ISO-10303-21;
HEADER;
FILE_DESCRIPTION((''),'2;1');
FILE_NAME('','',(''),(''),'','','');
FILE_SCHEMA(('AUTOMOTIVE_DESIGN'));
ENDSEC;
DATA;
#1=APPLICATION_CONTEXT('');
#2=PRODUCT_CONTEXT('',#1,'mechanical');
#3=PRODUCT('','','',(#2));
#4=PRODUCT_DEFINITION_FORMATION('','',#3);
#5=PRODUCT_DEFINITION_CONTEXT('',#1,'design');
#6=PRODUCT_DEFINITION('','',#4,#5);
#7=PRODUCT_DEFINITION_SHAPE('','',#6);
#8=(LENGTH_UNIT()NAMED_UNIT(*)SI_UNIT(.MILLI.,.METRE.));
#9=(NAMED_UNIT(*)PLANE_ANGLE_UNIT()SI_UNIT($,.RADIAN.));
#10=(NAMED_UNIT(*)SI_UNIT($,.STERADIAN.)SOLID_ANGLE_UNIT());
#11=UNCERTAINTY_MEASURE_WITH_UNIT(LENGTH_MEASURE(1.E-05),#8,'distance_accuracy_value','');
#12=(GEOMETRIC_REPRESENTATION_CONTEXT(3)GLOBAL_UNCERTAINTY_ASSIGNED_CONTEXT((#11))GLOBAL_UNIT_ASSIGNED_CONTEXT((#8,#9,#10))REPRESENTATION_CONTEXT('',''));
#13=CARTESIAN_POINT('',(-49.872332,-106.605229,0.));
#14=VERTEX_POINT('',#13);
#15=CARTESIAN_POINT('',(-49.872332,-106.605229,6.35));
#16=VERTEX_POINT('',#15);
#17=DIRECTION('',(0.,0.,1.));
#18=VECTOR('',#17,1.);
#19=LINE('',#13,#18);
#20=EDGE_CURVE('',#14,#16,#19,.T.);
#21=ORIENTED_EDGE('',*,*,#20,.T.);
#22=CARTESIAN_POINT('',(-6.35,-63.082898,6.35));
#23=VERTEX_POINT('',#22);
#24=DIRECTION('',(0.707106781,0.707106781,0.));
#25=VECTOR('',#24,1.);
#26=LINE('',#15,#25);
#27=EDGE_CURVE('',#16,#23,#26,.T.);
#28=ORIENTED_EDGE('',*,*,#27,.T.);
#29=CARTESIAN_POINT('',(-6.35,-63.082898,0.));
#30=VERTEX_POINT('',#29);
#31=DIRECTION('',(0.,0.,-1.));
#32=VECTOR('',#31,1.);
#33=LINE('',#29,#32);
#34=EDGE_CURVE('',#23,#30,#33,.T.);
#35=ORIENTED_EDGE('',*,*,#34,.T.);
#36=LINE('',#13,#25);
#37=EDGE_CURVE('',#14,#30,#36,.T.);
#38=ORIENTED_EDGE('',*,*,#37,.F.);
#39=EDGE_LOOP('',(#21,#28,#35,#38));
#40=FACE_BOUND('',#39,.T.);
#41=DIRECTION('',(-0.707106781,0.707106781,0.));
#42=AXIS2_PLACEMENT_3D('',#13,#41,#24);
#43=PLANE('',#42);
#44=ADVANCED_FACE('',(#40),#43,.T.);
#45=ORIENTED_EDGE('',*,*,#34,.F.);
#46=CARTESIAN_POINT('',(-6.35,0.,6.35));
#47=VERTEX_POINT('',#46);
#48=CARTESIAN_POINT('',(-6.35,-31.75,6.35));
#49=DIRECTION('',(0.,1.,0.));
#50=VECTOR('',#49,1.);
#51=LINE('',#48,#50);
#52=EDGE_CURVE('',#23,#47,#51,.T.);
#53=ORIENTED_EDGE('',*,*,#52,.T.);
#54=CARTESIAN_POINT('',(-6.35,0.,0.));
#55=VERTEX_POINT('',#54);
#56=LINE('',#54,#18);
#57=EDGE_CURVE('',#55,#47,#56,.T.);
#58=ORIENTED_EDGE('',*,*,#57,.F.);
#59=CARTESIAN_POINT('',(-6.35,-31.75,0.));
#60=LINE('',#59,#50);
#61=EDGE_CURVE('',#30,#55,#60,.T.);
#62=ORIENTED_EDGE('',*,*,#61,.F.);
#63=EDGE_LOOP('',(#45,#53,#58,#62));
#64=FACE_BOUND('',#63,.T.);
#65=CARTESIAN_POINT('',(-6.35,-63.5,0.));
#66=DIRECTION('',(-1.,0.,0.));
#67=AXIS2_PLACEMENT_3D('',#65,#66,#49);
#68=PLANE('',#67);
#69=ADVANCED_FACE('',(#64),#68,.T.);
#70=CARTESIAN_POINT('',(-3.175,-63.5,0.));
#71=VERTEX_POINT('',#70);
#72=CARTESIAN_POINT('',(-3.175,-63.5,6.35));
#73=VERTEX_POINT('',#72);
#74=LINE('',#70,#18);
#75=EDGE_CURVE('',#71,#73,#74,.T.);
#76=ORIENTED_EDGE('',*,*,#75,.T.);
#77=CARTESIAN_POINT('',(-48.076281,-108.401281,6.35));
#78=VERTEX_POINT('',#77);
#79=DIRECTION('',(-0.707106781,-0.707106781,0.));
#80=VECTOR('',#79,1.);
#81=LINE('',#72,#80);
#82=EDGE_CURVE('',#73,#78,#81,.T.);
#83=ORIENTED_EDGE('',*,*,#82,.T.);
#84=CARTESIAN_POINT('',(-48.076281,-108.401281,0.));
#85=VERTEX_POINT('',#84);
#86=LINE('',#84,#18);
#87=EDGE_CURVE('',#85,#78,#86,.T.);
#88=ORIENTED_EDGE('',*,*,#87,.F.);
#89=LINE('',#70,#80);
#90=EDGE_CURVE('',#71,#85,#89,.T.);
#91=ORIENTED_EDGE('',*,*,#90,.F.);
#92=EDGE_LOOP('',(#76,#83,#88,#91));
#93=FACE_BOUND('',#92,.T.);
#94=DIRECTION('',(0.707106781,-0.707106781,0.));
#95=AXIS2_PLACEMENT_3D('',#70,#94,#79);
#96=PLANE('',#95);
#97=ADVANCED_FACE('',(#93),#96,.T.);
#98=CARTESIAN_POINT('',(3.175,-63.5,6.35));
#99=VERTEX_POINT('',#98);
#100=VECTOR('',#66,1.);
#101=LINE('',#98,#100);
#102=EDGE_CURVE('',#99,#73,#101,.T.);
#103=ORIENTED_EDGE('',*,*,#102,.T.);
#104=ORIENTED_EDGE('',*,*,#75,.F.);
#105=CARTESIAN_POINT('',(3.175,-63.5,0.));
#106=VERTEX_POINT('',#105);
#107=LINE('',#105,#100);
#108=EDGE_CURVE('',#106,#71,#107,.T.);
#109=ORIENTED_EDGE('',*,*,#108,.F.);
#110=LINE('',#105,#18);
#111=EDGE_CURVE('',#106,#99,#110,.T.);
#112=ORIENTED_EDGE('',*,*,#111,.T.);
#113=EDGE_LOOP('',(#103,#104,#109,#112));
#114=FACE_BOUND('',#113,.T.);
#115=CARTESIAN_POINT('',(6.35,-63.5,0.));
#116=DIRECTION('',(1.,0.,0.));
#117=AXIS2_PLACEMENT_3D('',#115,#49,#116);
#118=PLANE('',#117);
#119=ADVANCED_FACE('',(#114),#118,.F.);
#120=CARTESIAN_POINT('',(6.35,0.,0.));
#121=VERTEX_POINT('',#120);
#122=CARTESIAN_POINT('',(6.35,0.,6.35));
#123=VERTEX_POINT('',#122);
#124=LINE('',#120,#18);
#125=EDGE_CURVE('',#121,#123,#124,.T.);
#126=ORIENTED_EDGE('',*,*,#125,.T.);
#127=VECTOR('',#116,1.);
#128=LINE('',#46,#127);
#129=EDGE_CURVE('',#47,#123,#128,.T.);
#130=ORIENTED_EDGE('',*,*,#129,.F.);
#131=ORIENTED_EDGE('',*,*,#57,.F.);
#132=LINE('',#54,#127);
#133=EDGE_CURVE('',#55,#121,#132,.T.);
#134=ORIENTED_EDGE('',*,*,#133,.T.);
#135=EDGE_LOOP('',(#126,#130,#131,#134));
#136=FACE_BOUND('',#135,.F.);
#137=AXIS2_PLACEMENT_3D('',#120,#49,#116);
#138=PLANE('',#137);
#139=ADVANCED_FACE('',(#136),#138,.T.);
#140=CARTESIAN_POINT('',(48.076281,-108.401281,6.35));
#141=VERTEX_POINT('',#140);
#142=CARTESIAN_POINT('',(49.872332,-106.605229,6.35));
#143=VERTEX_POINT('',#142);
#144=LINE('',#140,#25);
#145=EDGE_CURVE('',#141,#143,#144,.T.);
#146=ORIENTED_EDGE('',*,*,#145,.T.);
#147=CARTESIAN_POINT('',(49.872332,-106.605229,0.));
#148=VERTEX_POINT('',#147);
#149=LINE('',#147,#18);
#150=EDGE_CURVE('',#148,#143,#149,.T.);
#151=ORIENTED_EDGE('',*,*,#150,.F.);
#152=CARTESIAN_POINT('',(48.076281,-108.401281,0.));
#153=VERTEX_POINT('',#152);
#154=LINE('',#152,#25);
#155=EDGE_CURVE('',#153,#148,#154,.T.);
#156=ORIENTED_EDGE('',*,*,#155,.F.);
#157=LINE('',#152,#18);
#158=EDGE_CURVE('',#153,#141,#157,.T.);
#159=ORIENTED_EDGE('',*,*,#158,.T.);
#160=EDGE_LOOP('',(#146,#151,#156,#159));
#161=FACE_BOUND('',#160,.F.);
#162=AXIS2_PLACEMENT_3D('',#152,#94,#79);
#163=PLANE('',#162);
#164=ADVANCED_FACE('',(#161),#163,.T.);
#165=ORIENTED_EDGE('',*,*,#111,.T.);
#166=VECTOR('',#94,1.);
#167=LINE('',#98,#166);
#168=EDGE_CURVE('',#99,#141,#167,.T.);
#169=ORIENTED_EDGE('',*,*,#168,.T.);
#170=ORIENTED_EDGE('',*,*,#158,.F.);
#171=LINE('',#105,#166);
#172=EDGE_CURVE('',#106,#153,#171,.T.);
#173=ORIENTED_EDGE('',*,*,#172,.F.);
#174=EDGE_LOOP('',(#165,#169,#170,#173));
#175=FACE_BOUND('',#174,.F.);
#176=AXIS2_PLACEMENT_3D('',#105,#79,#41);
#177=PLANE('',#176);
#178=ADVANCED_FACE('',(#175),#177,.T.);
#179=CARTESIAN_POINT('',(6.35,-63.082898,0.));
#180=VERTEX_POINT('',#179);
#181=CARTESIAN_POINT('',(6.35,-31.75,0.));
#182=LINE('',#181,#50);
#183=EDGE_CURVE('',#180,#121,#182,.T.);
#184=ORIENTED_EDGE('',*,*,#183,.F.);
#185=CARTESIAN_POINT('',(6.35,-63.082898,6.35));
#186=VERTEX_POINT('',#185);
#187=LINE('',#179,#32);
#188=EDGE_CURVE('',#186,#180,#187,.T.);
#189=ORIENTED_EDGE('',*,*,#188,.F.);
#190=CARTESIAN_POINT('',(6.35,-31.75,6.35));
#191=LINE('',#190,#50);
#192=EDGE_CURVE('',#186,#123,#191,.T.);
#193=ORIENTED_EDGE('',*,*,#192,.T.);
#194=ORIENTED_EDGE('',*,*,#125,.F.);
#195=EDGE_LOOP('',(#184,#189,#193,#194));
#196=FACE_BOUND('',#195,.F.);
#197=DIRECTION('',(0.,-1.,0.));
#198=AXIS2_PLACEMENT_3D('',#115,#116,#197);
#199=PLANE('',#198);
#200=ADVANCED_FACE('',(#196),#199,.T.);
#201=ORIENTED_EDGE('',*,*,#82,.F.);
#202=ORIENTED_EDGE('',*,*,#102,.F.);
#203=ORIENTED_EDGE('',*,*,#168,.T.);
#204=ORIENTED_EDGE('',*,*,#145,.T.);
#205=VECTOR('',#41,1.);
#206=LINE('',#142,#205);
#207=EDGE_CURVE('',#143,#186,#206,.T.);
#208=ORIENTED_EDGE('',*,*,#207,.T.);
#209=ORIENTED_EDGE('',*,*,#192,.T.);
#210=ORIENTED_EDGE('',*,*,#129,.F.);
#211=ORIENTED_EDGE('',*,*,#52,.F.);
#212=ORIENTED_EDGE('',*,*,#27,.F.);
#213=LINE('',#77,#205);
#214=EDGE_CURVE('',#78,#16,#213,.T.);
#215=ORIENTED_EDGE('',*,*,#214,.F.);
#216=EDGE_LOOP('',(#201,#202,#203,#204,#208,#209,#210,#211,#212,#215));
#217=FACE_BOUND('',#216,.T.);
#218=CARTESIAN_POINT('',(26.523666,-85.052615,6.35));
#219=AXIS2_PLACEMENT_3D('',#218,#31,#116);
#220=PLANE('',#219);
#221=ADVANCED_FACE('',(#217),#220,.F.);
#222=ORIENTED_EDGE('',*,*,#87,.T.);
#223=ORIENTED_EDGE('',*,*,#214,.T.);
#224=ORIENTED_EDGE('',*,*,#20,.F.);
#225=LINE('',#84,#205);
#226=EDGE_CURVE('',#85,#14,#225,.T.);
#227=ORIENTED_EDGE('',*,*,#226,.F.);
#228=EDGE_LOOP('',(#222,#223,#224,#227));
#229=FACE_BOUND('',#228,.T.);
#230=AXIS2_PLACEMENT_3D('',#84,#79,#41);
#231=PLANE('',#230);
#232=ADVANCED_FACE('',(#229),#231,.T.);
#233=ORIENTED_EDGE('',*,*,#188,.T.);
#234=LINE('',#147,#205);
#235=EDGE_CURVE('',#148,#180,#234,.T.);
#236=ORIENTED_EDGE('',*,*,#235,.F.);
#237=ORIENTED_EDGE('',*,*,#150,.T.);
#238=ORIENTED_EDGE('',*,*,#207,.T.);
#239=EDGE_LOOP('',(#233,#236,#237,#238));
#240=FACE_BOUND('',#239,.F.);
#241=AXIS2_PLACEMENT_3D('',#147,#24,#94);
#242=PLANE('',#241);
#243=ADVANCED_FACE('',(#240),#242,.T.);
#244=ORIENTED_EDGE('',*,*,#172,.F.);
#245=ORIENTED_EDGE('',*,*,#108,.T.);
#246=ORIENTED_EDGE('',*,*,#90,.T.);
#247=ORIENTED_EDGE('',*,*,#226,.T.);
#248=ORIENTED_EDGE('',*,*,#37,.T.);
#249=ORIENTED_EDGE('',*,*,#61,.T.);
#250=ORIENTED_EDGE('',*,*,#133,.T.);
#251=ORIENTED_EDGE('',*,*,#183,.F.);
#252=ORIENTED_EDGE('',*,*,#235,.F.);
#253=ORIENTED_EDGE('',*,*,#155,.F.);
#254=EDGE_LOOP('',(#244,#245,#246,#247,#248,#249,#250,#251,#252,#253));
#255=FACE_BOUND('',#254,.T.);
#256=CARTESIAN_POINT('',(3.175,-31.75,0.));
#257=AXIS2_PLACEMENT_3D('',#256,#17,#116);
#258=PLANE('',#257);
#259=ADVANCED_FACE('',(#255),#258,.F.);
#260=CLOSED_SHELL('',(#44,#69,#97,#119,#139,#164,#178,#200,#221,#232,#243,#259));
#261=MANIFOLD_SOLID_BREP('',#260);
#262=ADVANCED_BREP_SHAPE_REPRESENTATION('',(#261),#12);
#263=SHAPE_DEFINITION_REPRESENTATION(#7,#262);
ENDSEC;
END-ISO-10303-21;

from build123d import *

# Parameters (mm, degrees)
F0_W     = 6.35
F0_H     = 63.5
F1_DEPTH = 6.35
F3_DEPTH = 6.35


# Not quite as in the source:
# - a feature names something its author has since deleted; it is built from what else it names


with BuildPart() as f1:
    # F0 (on Top) → F1 (new body)
    with BuildSketch(Plane.XY):
        with Locations((-3.175, -31.75)):
            Rectangle(F0_W, F0_H)
    extrude(amount=F1_DEPTH)

    # F2 (on face) → F3 (join)
    with BuildSketch(Plane(origin=(0, 0, 0), x_dir=(1, 0, 0), z_dir=(0, 0, -1))):
        Polygon((-4.9710512242, 61.7039487758), (-3.175, 63.5), (-48.0762806053, 108.4012806053), (-49.8723318296, 106.6052293811), align=None)
    extrude(amount=-F3_DEPTH)

    # F4: F1 across plane


with BuildPart() as f1_1:
    add(f1.part)
    add(f1.part.mirror(Plane.YZ))


solid = f1_1.part
